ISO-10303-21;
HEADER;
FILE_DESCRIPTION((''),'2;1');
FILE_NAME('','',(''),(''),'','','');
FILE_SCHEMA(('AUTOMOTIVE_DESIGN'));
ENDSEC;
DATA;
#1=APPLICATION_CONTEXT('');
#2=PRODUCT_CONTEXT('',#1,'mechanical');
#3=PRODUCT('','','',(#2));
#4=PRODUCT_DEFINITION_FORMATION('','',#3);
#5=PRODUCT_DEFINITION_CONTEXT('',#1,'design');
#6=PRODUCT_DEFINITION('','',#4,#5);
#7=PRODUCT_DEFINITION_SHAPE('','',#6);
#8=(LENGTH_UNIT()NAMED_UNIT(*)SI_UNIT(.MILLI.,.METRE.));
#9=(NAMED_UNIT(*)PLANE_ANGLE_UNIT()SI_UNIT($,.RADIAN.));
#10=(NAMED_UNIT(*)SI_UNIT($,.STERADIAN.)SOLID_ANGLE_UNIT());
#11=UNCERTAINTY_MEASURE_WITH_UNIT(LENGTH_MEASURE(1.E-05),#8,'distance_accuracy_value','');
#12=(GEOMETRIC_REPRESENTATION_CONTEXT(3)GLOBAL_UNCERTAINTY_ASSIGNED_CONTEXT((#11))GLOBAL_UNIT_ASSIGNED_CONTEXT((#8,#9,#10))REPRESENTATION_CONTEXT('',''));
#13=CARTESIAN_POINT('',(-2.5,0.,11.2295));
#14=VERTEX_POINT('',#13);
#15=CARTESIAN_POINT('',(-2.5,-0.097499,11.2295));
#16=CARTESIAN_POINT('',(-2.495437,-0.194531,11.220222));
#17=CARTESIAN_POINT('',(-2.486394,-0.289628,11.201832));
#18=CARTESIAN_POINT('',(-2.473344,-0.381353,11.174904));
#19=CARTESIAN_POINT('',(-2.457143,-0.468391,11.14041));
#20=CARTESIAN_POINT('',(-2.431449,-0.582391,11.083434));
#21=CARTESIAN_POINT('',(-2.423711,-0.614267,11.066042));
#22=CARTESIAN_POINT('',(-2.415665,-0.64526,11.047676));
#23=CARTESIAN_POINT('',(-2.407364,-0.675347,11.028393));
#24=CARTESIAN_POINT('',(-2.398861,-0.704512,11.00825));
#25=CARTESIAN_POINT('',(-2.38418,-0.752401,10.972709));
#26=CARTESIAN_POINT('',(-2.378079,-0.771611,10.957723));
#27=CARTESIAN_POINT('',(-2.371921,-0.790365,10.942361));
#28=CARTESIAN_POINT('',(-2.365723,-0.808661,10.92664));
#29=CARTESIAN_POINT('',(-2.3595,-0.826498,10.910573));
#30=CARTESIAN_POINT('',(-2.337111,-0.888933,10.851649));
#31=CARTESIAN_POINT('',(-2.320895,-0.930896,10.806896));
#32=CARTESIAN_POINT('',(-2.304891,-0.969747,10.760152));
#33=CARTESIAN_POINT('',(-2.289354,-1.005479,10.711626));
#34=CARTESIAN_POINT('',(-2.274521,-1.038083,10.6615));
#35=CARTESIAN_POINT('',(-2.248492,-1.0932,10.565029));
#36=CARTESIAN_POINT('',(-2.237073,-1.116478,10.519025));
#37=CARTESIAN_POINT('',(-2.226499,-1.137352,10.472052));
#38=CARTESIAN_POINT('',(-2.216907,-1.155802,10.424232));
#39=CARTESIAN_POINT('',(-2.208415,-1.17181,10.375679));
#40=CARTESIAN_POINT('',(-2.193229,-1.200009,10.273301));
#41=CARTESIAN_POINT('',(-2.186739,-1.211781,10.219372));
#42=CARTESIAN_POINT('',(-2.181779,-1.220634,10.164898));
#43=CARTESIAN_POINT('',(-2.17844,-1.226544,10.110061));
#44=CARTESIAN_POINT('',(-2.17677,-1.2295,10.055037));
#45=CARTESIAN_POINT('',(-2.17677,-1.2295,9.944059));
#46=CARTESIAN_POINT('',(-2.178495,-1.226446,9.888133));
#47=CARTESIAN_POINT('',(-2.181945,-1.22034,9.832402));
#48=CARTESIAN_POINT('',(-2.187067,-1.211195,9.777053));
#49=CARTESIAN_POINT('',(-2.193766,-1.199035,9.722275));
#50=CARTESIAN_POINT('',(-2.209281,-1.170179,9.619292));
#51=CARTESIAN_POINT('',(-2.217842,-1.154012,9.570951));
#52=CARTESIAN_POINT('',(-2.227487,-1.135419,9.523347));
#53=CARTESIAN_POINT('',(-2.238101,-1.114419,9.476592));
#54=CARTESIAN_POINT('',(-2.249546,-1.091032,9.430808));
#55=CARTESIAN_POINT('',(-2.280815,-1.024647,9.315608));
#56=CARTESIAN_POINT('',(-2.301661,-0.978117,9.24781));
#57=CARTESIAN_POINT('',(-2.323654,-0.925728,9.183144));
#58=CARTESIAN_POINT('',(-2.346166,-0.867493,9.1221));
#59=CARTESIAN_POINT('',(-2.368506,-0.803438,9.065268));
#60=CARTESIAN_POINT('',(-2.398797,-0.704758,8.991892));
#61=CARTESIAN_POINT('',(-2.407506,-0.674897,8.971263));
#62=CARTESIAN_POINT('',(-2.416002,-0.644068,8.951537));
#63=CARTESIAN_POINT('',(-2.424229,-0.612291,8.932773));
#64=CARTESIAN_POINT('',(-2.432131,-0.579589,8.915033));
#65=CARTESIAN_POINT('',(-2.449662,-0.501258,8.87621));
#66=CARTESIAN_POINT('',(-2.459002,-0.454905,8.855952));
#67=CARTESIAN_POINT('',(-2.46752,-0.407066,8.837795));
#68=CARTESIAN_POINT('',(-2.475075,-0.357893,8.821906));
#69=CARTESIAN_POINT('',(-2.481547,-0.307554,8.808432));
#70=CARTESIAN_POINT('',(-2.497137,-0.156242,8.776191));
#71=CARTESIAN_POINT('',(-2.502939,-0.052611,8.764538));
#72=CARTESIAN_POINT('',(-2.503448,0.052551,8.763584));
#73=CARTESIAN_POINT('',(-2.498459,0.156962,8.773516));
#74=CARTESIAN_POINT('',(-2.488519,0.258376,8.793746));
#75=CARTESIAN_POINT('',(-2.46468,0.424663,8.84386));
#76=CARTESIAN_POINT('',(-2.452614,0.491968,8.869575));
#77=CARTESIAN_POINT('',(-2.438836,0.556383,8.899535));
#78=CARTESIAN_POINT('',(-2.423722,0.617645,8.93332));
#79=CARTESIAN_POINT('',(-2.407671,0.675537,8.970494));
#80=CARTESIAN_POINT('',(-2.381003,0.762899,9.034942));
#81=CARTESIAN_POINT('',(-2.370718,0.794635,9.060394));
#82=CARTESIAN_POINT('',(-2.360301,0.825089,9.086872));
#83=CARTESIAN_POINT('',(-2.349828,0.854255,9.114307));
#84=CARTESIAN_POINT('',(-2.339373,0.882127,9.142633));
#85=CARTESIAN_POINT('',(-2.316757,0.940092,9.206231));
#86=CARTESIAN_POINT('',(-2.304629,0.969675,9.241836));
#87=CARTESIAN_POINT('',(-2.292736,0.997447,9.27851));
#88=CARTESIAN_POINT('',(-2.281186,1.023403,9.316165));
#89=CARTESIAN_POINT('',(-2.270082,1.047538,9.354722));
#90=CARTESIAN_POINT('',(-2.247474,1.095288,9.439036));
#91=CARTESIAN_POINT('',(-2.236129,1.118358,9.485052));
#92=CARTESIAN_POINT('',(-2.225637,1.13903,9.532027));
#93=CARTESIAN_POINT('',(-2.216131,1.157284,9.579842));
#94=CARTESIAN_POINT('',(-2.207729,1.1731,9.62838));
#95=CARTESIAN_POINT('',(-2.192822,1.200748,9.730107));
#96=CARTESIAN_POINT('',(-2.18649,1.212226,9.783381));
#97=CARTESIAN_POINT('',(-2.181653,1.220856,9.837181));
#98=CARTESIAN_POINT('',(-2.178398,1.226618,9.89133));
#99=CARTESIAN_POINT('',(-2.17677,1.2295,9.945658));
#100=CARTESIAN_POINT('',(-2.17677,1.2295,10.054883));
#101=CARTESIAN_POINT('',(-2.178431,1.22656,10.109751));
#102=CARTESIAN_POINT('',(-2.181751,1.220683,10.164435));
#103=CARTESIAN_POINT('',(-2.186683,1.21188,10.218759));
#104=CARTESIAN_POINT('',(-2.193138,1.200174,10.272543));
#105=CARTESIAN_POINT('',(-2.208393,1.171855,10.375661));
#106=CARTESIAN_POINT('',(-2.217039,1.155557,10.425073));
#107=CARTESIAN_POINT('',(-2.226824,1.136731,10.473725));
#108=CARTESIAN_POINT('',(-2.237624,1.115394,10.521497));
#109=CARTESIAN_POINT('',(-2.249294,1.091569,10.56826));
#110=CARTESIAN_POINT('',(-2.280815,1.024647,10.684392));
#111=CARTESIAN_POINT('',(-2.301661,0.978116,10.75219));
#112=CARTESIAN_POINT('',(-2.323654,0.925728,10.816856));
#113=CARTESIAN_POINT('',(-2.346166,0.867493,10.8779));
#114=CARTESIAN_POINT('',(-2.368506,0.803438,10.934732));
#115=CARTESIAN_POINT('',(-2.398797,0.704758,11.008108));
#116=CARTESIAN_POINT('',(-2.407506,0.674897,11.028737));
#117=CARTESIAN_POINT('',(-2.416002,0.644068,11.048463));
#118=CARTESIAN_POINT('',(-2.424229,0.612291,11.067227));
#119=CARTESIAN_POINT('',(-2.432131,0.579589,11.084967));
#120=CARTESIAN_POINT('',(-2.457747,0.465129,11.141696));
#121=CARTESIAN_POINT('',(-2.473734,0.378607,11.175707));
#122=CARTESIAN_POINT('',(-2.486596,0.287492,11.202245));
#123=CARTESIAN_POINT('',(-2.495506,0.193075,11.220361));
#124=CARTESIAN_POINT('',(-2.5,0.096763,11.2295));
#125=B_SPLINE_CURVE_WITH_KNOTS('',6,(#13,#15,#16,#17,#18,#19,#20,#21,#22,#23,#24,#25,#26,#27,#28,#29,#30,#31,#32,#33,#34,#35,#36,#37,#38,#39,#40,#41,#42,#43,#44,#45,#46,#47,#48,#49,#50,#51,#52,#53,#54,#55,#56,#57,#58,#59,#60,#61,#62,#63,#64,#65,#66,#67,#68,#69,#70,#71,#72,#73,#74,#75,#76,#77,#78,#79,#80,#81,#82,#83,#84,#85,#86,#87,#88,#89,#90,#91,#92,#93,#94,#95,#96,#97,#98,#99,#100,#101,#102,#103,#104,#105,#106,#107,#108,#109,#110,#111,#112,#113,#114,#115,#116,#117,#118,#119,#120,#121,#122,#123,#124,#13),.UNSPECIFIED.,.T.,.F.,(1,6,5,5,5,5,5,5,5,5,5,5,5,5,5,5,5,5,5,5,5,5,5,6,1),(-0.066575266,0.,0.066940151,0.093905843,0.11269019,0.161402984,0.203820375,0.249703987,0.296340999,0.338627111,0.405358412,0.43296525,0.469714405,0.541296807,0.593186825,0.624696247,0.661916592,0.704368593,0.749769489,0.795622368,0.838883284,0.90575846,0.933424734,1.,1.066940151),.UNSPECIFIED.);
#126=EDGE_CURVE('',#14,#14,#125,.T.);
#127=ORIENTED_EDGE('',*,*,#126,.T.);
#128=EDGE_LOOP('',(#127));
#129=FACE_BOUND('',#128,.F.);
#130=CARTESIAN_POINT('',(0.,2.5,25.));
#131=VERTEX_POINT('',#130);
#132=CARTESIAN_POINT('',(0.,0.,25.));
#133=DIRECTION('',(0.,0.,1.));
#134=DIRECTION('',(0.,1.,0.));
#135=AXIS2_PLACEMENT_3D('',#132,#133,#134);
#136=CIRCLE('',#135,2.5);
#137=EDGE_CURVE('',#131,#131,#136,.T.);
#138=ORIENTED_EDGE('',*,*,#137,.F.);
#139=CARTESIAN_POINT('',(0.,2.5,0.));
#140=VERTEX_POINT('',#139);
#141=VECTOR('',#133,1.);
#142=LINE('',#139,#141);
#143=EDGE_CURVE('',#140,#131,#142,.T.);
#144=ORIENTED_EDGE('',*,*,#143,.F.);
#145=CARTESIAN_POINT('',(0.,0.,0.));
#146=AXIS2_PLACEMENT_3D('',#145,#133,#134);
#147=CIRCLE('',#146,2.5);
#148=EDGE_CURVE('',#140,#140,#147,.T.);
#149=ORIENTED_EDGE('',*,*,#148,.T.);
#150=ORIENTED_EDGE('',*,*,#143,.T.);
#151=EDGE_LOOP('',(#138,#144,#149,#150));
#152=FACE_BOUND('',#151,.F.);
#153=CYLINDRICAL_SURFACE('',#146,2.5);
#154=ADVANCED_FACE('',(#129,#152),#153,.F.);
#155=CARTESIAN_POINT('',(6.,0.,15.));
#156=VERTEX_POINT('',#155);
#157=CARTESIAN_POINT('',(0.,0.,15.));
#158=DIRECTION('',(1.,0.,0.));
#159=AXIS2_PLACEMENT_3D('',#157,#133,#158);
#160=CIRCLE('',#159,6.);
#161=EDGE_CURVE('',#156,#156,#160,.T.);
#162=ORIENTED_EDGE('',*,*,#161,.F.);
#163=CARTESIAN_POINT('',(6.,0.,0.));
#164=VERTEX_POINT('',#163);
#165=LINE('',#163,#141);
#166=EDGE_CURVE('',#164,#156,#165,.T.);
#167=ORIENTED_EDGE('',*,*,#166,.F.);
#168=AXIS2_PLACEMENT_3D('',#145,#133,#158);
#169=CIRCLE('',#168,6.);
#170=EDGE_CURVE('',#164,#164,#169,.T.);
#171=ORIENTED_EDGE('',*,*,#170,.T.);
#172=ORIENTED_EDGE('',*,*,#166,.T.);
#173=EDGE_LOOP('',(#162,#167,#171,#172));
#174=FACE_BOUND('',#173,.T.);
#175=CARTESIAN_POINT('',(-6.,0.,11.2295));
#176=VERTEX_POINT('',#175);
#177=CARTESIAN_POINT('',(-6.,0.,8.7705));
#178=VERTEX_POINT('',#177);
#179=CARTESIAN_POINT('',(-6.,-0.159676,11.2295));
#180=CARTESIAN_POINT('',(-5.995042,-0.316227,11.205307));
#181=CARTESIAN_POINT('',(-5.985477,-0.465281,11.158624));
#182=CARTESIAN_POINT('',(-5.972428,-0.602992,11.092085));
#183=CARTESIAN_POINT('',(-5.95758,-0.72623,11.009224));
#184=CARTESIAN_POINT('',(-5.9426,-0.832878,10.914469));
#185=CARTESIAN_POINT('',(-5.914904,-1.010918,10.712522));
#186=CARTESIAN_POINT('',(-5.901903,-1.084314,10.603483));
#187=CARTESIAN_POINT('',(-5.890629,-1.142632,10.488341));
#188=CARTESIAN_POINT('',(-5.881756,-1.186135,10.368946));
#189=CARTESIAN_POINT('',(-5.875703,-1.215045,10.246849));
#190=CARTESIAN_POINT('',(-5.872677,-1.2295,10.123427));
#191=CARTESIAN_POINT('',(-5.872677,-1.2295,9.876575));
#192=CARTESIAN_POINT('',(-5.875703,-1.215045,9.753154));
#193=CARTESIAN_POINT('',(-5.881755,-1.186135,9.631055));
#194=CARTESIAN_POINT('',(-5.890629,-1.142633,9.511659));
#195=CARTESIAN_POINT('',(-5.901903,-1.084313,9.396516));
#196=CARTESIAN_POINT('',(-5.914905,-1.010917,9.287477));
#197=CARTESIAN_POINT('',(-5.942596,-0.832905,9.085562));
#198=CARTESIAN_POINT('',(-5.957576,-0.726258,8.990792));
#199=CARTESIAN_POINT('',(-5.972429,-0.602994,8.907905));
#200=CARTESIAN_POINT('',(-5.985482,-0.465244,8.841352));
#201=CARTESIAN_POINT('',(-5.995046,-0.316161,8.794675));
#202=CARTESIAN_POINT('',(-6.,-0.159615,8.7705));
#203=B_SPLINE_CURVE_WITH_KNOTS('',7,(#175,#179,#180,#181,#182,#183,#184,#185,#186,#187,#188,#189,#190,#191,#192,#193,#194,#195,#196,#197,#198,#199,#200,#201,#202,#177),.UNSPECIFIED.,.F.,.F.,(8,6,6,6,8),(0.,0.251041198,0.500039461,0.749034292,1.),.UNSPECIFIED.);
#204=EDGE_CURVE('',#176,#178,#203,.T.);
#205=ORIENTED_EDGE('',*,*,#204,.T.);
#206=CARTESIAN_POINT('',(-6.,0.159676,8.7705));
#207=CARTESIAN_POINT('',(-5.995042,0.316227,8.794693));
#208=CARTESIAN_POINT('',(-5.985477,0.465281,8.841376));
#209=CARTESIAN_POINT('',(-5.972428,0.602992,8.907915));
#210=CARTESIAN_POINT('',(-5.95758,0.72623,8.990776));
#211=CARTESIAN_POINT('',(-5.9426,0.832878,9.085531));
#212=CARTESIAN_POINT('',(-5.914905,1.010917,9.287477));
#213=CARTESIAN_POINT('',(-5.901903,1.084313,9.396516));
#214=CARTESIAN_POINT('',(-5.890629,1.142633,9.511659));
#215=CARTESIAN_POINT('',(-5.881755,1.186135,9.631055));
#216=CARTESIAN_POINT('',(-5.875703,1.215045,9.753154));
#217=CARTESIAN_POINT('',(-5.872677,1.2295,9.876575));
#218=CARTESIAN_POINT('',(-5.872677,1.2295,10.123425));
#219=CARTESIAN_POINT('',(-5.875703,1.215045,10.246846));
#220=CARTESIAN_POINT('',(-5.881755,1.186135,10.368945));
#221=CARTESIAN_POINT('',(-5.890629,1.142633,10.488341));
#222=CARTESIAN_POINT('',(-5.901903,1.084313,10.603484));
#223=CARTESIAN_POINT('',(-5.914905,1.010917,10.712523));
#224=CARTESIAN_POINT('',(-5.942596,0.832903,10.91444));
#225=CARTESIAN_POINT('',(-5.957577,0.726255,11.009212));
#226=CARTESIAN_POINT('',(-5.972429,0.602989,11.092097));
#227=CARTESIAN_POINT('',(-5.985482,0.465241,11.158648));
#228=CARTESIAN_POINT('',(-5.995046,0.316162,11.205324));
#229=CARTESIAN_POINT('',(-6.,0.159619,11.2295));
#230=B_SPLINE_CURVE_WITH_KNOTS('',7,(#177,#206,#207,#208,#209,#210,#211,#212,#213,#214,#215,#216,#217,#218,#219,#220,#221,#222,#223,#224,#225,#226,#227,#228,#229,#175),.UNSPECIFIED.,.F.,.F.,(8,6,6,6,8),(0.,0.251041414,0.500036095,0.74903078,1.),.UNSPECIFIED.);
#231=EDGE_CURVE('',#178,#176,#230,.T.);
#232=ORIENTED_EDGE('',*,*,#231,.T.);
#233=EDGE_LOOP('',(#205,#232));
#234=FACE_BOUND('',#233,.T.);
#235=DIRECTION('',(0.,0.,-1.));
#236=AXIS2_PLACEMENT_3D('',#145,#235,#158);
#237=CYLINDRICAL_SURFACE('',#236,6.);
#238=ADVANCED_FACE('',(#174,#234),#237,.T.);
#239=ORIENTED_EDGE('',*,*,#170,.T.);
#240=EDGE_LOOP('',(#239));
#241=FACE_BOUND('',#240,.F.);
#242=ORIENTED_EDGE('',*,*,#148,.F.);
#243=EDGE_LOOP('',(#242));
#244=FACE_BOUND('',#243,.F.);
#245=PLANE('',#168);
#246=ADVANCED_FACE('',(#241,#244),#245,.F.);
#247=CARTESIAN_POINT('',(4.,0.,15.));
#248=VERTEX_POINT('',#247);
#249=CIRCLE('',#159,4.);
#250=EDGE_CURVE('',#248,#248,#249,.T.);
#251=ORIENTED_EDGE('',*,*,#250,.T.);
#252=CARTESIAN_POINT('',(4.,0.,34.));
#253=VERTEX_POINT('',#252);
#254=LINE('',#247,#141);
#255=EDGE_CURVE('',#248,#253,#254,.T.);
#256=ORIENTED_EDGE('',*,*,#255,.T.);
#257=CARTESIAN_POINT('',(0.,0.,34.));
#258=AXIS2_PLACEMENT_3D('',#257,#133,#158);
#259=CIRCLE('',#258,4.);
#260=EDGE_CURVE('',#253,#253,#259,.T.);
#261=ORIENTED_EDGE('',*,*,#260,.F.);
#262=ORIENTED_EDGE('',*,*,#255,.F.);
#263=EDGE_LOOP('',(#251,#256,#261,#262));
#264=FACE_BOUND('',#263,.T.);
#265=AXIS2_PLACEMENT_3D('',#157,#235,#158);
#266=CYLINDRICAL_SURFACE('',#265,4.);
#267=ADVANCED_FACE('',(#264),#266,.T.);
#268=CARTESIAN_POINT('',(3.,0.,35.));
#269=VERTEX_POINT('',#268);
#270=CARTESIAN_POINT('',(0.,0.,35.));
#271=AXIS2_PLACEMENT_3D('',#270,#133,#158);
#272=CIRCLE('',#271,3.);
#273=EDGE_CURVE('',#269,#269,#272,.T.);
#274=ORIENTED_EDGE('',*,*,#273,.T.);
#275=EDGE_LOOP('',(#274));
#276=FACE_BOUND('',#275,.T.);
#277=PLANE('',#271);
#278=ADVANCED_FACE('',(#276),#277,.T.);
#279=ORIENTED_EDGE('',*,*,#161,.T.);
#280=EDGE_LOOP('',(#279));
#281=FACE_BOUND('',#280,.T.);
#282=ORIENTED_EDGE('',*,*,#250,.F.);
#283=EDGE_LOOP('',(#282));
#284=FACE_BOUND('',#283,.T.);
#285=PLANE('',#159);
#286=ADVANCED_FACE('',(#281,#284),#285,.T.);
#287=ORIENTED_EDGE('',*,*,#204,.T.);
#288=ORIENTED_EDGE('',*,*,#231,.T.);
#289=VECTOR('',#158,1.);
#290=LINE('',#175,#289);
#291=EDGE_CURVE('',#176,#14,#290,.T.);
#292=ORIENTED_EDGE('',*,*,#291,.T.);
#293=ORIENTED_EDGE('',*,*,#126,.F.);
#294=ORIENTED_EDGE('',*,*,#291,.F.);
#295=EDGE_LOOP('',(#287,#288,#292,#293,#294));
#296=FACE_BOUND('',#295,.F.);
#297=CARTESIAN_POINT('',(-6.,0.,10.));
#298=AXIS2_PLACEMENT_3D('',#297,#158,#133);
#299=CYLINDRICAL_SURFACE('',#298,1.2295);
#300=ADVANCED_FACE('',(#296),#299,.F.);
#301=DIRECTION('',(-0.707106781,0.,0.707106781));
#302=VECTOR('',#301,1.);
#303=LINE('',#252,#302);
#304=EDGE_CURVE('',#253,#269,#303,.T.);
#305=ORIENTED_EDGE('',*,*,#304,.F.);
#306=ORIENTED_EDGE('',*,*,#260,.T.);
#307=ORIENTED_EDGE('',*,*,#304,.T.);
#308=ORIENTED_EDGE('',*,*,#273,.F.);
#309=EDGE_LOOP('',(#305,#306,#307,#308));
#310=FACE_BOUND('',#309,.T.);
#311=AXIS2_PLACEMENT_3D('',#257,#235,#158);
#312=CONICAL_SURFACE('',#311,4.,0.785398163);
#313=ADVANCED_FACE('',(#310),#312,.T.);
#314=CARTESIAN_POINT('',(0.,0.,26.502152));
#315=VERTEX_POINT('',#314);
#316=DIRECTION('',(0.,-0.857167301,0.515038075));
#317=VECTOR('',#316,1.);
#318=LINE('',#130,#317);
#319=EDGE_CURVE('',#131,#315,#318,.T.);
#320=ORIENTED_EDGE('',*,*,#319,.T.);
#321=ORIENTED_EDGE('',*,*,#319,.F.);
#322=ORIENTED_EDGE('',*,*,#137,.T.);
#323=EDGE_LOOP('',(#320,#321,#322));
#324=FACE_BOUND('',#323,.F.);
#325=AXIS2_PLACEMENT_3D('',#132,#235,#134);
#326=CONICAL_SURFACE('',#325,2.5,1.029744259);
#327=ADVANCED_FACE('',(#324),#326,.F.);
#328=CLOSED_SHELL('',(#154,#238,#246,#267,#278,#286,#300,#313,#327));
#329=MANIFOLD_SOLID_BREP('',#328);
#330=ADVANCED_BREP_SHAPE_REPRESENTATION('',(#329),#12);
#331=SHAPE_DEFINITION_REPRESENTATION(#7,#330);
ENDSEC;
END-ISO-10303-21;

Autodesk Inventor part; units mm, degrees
ref_plane "XZ Plane" through (0, 0, 0) normal (0, 1, 0) x (-1, 0, 0)
ref_plane "XY Plane" through (0, 0, 0) normal (0, 0, 1) x (1, 0, 0)
sketch "Skizze1" plane through (0, 0, 0) normal (0, 0, 1) x (1, 0, 0)
  circle A0 centre (0, 0) radius 6
  dimension "d0" = 12
extrude "Extrusion1" add sketch "Skizze1" along normal blind 15
sketch "Skizze2" plane through (0, 0, 15) normal (0, 0, 1) x (1, 0, 0)
  circle A0 centre (0, 0) radius 6 projected
  circle A1 centre (0, 0) radius 4
  dimension "d3" = 8
extrude "Extrusion2" add sketch "Skizze2" along normal blind 20 contours A1
sketch "Skizze3" plane through (0, 0, 0) normal (0, 0, -1) x (-1, 0, 0)
  circle A0 centre (0, 0) radius 6 projected
hole "Bohrung1" at (0, 0, 0) direction (0, 0, 1) diameter 5 depth 25 tip angle 118
ref_plane "Arbeitsebene1" through (-6, 0, 0) normal (1, 0, 0) x (0, 1, 0)
sketch "Skizze4" plane through (-6, 0, 0) normal (1, 0, 0) x (0, 1, 0)
  line L0 (-8.4, 0) -> (8.4, 0) projected
  line L1 (0, -3) -> (0, 18) projected
  point P0 (0, 0)
  point P1 (0, 10)
  dimension "d13" = 10
hole "Bohrung2" at (-6, 0, 10) direction (1, 0, 0) diameter 2.459 end up to surface thread size "M3x0.5" class "6H" standard "ISO Metric profile"
chamfer "Fase1" distance 1 angle 45 1 edges at (-4, 0, 35)
properties part number "13_0204_061"
